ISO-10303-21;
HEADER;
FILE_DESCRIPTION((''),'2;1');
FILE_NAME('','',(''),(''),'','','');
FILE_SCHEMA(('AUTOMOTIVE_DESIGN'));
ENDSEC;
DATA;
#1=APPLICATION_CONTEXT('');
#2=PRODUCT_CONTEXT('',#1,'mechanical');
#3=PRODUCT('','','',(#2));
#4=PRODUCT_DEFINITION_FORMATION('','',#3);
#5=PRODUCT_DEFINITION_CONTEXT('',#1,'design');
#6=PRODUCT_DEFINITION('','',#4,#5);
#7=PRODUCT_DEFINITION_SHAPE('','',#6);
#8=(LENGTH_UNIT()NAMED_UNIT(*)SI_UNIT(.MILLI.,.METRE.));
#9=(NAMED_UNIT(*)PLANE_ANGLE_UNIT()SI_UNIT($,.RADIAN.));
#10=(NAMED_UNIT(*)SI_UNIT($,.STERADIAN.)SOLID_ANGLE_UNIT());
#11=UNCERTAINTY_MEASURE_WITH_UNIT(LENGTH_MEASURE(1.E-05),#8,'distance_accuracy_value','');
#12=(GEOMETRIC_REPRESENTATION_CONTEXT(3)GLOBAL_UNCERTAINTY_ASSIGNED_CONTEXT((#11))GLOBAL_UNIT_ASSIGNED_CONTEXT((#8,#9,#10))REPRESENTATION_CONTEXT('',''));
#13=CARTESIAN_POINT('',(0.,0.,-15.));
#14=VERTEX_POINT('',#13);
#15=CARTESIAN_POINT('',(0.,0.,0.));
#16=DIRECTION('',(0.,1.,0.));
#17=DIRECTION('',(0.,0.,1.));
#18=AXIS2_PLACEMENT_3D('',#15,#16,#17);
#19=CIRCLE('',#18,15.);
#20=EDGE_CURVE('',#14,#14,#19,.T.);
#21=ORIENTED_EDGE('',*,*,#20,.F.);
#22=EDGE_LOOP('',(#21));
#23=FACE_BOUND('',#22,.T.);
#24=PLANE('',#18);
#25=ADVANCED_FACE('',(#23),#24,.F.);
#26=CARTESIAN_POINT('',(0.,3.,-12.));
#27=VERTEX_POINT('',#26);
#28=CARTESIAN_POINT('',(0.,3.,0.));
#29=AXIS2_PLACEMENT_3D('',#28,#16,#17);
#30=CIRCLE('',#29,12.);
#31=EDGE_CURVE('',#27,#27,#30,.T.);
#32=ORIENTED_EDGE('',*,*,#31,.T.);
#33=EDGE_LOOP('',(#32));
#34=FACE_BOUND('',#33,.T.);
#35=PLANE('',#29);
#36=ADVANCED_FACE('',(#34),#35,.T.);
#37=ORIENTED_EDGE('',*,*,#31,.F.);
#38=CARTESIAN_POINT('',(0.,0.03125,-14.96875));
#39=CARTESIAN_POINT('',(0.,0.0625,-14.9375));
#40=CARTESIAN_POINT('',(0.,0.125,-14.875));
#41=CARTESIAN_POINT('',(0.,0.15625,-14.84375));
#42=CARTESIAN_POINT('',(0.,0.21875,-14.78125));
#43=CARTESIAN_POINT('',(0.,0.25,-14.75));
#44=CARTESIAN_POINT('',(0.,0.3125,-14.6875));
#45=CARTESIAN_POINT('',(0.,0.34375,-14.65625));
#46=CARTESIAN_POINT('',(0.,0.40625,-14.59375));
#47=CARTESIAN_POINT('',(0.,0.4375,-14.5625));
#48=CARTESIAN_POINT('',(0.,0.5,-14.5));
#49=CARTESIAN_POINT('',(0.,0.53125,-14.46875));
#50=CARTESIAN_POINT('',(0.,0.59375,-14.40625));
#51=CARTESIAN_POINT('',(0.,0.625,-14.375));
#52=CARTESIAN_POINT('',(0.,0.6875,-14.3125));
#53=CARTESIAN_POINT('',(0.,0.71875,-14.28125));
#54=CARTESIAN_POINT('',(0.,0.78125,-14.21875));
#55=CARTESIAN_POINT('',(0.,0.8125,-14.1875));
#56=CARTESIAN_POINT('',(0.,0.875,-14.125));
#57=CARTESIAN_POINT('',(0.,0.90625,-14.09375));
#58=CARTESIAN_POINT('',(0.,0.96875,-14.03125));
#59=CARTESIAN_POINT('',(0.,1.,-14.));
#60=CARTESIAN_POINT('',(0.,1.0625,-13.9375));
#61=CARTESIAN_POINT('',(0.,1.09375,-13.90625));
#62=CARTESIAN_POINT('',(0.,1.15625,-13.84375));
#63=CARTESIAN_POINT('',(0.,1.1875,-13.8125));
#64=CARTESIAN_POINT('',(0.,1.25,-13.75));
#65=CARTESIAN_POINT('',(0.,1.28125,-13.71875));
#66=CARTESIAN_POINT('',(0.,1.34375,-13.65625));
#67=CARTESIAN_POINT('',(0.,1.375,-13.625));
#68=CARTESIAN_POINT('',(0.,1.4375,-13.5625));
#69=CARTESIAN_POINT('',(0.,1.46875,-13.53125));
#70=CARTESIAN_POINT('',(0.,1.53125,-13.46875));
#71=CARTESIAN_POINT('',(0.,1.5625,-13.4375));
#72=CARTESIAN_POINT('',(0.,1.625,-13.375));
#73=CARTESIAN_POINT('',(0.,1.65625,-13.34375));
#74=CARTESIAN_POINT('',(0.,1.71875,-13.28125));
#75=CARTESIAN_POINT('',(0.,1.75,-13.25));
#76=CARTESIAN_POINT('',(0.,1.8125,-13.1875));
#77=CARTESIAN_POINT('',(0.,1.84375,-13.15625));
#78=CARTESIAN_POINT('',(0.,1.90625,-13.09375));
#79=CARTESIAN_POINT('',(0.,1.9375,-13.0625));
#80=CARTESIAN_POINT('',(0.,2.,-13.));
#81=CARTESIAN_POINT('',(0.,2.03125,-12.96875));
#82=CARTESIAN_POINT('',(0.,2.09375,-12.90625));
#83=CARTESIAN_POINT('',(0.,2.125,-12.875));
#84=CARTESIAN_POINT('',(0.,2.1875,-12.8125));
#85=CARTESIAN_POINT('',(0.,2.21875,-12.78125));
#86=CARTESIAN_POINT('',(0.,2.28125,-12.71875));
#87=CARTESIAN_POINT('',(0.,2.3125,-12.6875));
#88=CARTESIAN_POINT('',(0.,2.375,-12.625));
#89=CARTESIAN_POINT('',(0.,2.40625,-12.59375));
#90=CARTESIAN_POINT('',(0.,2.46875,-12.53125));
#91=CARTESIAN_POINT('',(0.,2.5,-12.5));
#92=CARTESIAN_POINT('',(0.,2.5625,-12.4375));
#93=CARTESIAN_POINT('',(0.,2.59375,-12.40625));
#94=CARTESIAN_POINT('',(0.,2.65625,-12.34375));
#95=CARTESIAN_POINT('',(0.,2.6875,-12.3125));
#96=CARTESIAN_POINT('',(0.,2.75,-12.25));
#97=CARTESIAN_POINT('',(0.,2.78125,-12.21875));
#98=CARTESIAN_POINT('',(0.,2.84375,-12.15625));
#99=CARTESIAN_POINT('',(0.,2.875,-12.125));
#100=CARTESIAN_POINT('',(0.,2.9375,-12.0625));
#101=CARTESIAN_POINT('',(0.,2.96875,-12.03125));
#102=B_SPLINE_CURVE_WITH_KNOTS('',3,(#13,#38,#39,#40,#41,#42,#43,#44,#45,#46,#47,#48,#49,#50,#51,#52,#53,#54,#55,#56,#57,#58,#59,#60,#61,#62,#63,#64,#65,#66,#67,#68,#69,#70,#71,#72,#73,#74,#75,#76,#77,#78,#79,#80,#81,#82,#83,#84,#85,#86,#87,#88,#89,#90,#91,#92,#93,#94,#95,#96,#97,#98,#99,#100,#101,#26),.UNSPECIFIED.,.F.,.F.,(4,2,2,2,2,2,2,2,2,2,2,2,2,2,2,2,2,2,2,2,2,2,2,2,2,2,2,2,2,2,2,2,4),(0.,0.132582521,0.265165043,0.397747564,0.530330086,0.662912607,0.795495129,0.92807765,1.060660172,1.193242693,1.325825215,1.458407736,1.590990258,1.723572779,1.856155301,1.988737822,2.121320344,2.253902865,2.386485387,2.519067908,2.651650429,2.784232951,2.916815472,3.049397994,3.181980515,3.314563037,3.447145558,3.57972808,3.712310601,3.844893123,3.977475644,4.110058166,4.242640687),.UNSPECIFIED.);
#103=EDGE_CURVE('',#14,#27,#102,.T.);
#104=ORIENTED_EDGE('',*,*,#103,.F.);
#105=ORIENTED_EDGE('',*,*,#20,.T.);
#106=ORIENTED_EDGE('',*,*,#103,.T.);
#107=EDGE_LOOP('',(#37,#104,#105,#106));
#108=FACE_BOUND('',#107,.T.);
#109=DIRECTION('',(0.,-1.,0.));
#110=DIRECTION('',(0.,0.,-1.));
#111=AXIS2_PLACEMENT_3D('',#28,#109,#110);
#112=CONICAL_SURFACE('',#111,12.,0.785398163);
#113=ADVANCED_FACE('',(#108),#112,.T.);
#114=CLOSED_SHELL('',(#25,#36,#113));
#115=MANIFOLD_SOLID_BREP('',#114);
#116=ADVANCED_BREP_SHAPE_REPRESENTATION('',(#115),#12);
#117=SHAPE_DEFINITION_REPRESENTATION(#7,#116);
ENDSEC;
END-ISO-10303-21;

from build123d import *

# Parameters (mm, degrees)
ESQUISSE1_R        = 15
BOSS_EXTRU_1_DEPTH = 3
CHANFREIN1_SIZE    = 3


with BuildPart() as part:
    # Esquisse1 → Boss.-Extru.1 (new body)
    with BuildSketch(Plane(origin=(0, 0, 0), x_dir=(1, 0, 0), z_dir=(0, 1, 0))):
        with Locations(Location((0, 0, 0), (0, 0, 270))):
            Circle(ESQUISSE1_R)
    extrude(amount=BOSS_EXTRU_1_DEPTH)

    # Chanfrein1
    chanfrein1_edges = [part.edges().sort_by_distance(p)[0] for p in [
        (0, 3, -15),
    ]]
    chamfer(chanfrein1_edges, length=CHANFREIN1_SIZE - 0.0001)  # a hair under: the kernel refuses the full size


solid = part.part
